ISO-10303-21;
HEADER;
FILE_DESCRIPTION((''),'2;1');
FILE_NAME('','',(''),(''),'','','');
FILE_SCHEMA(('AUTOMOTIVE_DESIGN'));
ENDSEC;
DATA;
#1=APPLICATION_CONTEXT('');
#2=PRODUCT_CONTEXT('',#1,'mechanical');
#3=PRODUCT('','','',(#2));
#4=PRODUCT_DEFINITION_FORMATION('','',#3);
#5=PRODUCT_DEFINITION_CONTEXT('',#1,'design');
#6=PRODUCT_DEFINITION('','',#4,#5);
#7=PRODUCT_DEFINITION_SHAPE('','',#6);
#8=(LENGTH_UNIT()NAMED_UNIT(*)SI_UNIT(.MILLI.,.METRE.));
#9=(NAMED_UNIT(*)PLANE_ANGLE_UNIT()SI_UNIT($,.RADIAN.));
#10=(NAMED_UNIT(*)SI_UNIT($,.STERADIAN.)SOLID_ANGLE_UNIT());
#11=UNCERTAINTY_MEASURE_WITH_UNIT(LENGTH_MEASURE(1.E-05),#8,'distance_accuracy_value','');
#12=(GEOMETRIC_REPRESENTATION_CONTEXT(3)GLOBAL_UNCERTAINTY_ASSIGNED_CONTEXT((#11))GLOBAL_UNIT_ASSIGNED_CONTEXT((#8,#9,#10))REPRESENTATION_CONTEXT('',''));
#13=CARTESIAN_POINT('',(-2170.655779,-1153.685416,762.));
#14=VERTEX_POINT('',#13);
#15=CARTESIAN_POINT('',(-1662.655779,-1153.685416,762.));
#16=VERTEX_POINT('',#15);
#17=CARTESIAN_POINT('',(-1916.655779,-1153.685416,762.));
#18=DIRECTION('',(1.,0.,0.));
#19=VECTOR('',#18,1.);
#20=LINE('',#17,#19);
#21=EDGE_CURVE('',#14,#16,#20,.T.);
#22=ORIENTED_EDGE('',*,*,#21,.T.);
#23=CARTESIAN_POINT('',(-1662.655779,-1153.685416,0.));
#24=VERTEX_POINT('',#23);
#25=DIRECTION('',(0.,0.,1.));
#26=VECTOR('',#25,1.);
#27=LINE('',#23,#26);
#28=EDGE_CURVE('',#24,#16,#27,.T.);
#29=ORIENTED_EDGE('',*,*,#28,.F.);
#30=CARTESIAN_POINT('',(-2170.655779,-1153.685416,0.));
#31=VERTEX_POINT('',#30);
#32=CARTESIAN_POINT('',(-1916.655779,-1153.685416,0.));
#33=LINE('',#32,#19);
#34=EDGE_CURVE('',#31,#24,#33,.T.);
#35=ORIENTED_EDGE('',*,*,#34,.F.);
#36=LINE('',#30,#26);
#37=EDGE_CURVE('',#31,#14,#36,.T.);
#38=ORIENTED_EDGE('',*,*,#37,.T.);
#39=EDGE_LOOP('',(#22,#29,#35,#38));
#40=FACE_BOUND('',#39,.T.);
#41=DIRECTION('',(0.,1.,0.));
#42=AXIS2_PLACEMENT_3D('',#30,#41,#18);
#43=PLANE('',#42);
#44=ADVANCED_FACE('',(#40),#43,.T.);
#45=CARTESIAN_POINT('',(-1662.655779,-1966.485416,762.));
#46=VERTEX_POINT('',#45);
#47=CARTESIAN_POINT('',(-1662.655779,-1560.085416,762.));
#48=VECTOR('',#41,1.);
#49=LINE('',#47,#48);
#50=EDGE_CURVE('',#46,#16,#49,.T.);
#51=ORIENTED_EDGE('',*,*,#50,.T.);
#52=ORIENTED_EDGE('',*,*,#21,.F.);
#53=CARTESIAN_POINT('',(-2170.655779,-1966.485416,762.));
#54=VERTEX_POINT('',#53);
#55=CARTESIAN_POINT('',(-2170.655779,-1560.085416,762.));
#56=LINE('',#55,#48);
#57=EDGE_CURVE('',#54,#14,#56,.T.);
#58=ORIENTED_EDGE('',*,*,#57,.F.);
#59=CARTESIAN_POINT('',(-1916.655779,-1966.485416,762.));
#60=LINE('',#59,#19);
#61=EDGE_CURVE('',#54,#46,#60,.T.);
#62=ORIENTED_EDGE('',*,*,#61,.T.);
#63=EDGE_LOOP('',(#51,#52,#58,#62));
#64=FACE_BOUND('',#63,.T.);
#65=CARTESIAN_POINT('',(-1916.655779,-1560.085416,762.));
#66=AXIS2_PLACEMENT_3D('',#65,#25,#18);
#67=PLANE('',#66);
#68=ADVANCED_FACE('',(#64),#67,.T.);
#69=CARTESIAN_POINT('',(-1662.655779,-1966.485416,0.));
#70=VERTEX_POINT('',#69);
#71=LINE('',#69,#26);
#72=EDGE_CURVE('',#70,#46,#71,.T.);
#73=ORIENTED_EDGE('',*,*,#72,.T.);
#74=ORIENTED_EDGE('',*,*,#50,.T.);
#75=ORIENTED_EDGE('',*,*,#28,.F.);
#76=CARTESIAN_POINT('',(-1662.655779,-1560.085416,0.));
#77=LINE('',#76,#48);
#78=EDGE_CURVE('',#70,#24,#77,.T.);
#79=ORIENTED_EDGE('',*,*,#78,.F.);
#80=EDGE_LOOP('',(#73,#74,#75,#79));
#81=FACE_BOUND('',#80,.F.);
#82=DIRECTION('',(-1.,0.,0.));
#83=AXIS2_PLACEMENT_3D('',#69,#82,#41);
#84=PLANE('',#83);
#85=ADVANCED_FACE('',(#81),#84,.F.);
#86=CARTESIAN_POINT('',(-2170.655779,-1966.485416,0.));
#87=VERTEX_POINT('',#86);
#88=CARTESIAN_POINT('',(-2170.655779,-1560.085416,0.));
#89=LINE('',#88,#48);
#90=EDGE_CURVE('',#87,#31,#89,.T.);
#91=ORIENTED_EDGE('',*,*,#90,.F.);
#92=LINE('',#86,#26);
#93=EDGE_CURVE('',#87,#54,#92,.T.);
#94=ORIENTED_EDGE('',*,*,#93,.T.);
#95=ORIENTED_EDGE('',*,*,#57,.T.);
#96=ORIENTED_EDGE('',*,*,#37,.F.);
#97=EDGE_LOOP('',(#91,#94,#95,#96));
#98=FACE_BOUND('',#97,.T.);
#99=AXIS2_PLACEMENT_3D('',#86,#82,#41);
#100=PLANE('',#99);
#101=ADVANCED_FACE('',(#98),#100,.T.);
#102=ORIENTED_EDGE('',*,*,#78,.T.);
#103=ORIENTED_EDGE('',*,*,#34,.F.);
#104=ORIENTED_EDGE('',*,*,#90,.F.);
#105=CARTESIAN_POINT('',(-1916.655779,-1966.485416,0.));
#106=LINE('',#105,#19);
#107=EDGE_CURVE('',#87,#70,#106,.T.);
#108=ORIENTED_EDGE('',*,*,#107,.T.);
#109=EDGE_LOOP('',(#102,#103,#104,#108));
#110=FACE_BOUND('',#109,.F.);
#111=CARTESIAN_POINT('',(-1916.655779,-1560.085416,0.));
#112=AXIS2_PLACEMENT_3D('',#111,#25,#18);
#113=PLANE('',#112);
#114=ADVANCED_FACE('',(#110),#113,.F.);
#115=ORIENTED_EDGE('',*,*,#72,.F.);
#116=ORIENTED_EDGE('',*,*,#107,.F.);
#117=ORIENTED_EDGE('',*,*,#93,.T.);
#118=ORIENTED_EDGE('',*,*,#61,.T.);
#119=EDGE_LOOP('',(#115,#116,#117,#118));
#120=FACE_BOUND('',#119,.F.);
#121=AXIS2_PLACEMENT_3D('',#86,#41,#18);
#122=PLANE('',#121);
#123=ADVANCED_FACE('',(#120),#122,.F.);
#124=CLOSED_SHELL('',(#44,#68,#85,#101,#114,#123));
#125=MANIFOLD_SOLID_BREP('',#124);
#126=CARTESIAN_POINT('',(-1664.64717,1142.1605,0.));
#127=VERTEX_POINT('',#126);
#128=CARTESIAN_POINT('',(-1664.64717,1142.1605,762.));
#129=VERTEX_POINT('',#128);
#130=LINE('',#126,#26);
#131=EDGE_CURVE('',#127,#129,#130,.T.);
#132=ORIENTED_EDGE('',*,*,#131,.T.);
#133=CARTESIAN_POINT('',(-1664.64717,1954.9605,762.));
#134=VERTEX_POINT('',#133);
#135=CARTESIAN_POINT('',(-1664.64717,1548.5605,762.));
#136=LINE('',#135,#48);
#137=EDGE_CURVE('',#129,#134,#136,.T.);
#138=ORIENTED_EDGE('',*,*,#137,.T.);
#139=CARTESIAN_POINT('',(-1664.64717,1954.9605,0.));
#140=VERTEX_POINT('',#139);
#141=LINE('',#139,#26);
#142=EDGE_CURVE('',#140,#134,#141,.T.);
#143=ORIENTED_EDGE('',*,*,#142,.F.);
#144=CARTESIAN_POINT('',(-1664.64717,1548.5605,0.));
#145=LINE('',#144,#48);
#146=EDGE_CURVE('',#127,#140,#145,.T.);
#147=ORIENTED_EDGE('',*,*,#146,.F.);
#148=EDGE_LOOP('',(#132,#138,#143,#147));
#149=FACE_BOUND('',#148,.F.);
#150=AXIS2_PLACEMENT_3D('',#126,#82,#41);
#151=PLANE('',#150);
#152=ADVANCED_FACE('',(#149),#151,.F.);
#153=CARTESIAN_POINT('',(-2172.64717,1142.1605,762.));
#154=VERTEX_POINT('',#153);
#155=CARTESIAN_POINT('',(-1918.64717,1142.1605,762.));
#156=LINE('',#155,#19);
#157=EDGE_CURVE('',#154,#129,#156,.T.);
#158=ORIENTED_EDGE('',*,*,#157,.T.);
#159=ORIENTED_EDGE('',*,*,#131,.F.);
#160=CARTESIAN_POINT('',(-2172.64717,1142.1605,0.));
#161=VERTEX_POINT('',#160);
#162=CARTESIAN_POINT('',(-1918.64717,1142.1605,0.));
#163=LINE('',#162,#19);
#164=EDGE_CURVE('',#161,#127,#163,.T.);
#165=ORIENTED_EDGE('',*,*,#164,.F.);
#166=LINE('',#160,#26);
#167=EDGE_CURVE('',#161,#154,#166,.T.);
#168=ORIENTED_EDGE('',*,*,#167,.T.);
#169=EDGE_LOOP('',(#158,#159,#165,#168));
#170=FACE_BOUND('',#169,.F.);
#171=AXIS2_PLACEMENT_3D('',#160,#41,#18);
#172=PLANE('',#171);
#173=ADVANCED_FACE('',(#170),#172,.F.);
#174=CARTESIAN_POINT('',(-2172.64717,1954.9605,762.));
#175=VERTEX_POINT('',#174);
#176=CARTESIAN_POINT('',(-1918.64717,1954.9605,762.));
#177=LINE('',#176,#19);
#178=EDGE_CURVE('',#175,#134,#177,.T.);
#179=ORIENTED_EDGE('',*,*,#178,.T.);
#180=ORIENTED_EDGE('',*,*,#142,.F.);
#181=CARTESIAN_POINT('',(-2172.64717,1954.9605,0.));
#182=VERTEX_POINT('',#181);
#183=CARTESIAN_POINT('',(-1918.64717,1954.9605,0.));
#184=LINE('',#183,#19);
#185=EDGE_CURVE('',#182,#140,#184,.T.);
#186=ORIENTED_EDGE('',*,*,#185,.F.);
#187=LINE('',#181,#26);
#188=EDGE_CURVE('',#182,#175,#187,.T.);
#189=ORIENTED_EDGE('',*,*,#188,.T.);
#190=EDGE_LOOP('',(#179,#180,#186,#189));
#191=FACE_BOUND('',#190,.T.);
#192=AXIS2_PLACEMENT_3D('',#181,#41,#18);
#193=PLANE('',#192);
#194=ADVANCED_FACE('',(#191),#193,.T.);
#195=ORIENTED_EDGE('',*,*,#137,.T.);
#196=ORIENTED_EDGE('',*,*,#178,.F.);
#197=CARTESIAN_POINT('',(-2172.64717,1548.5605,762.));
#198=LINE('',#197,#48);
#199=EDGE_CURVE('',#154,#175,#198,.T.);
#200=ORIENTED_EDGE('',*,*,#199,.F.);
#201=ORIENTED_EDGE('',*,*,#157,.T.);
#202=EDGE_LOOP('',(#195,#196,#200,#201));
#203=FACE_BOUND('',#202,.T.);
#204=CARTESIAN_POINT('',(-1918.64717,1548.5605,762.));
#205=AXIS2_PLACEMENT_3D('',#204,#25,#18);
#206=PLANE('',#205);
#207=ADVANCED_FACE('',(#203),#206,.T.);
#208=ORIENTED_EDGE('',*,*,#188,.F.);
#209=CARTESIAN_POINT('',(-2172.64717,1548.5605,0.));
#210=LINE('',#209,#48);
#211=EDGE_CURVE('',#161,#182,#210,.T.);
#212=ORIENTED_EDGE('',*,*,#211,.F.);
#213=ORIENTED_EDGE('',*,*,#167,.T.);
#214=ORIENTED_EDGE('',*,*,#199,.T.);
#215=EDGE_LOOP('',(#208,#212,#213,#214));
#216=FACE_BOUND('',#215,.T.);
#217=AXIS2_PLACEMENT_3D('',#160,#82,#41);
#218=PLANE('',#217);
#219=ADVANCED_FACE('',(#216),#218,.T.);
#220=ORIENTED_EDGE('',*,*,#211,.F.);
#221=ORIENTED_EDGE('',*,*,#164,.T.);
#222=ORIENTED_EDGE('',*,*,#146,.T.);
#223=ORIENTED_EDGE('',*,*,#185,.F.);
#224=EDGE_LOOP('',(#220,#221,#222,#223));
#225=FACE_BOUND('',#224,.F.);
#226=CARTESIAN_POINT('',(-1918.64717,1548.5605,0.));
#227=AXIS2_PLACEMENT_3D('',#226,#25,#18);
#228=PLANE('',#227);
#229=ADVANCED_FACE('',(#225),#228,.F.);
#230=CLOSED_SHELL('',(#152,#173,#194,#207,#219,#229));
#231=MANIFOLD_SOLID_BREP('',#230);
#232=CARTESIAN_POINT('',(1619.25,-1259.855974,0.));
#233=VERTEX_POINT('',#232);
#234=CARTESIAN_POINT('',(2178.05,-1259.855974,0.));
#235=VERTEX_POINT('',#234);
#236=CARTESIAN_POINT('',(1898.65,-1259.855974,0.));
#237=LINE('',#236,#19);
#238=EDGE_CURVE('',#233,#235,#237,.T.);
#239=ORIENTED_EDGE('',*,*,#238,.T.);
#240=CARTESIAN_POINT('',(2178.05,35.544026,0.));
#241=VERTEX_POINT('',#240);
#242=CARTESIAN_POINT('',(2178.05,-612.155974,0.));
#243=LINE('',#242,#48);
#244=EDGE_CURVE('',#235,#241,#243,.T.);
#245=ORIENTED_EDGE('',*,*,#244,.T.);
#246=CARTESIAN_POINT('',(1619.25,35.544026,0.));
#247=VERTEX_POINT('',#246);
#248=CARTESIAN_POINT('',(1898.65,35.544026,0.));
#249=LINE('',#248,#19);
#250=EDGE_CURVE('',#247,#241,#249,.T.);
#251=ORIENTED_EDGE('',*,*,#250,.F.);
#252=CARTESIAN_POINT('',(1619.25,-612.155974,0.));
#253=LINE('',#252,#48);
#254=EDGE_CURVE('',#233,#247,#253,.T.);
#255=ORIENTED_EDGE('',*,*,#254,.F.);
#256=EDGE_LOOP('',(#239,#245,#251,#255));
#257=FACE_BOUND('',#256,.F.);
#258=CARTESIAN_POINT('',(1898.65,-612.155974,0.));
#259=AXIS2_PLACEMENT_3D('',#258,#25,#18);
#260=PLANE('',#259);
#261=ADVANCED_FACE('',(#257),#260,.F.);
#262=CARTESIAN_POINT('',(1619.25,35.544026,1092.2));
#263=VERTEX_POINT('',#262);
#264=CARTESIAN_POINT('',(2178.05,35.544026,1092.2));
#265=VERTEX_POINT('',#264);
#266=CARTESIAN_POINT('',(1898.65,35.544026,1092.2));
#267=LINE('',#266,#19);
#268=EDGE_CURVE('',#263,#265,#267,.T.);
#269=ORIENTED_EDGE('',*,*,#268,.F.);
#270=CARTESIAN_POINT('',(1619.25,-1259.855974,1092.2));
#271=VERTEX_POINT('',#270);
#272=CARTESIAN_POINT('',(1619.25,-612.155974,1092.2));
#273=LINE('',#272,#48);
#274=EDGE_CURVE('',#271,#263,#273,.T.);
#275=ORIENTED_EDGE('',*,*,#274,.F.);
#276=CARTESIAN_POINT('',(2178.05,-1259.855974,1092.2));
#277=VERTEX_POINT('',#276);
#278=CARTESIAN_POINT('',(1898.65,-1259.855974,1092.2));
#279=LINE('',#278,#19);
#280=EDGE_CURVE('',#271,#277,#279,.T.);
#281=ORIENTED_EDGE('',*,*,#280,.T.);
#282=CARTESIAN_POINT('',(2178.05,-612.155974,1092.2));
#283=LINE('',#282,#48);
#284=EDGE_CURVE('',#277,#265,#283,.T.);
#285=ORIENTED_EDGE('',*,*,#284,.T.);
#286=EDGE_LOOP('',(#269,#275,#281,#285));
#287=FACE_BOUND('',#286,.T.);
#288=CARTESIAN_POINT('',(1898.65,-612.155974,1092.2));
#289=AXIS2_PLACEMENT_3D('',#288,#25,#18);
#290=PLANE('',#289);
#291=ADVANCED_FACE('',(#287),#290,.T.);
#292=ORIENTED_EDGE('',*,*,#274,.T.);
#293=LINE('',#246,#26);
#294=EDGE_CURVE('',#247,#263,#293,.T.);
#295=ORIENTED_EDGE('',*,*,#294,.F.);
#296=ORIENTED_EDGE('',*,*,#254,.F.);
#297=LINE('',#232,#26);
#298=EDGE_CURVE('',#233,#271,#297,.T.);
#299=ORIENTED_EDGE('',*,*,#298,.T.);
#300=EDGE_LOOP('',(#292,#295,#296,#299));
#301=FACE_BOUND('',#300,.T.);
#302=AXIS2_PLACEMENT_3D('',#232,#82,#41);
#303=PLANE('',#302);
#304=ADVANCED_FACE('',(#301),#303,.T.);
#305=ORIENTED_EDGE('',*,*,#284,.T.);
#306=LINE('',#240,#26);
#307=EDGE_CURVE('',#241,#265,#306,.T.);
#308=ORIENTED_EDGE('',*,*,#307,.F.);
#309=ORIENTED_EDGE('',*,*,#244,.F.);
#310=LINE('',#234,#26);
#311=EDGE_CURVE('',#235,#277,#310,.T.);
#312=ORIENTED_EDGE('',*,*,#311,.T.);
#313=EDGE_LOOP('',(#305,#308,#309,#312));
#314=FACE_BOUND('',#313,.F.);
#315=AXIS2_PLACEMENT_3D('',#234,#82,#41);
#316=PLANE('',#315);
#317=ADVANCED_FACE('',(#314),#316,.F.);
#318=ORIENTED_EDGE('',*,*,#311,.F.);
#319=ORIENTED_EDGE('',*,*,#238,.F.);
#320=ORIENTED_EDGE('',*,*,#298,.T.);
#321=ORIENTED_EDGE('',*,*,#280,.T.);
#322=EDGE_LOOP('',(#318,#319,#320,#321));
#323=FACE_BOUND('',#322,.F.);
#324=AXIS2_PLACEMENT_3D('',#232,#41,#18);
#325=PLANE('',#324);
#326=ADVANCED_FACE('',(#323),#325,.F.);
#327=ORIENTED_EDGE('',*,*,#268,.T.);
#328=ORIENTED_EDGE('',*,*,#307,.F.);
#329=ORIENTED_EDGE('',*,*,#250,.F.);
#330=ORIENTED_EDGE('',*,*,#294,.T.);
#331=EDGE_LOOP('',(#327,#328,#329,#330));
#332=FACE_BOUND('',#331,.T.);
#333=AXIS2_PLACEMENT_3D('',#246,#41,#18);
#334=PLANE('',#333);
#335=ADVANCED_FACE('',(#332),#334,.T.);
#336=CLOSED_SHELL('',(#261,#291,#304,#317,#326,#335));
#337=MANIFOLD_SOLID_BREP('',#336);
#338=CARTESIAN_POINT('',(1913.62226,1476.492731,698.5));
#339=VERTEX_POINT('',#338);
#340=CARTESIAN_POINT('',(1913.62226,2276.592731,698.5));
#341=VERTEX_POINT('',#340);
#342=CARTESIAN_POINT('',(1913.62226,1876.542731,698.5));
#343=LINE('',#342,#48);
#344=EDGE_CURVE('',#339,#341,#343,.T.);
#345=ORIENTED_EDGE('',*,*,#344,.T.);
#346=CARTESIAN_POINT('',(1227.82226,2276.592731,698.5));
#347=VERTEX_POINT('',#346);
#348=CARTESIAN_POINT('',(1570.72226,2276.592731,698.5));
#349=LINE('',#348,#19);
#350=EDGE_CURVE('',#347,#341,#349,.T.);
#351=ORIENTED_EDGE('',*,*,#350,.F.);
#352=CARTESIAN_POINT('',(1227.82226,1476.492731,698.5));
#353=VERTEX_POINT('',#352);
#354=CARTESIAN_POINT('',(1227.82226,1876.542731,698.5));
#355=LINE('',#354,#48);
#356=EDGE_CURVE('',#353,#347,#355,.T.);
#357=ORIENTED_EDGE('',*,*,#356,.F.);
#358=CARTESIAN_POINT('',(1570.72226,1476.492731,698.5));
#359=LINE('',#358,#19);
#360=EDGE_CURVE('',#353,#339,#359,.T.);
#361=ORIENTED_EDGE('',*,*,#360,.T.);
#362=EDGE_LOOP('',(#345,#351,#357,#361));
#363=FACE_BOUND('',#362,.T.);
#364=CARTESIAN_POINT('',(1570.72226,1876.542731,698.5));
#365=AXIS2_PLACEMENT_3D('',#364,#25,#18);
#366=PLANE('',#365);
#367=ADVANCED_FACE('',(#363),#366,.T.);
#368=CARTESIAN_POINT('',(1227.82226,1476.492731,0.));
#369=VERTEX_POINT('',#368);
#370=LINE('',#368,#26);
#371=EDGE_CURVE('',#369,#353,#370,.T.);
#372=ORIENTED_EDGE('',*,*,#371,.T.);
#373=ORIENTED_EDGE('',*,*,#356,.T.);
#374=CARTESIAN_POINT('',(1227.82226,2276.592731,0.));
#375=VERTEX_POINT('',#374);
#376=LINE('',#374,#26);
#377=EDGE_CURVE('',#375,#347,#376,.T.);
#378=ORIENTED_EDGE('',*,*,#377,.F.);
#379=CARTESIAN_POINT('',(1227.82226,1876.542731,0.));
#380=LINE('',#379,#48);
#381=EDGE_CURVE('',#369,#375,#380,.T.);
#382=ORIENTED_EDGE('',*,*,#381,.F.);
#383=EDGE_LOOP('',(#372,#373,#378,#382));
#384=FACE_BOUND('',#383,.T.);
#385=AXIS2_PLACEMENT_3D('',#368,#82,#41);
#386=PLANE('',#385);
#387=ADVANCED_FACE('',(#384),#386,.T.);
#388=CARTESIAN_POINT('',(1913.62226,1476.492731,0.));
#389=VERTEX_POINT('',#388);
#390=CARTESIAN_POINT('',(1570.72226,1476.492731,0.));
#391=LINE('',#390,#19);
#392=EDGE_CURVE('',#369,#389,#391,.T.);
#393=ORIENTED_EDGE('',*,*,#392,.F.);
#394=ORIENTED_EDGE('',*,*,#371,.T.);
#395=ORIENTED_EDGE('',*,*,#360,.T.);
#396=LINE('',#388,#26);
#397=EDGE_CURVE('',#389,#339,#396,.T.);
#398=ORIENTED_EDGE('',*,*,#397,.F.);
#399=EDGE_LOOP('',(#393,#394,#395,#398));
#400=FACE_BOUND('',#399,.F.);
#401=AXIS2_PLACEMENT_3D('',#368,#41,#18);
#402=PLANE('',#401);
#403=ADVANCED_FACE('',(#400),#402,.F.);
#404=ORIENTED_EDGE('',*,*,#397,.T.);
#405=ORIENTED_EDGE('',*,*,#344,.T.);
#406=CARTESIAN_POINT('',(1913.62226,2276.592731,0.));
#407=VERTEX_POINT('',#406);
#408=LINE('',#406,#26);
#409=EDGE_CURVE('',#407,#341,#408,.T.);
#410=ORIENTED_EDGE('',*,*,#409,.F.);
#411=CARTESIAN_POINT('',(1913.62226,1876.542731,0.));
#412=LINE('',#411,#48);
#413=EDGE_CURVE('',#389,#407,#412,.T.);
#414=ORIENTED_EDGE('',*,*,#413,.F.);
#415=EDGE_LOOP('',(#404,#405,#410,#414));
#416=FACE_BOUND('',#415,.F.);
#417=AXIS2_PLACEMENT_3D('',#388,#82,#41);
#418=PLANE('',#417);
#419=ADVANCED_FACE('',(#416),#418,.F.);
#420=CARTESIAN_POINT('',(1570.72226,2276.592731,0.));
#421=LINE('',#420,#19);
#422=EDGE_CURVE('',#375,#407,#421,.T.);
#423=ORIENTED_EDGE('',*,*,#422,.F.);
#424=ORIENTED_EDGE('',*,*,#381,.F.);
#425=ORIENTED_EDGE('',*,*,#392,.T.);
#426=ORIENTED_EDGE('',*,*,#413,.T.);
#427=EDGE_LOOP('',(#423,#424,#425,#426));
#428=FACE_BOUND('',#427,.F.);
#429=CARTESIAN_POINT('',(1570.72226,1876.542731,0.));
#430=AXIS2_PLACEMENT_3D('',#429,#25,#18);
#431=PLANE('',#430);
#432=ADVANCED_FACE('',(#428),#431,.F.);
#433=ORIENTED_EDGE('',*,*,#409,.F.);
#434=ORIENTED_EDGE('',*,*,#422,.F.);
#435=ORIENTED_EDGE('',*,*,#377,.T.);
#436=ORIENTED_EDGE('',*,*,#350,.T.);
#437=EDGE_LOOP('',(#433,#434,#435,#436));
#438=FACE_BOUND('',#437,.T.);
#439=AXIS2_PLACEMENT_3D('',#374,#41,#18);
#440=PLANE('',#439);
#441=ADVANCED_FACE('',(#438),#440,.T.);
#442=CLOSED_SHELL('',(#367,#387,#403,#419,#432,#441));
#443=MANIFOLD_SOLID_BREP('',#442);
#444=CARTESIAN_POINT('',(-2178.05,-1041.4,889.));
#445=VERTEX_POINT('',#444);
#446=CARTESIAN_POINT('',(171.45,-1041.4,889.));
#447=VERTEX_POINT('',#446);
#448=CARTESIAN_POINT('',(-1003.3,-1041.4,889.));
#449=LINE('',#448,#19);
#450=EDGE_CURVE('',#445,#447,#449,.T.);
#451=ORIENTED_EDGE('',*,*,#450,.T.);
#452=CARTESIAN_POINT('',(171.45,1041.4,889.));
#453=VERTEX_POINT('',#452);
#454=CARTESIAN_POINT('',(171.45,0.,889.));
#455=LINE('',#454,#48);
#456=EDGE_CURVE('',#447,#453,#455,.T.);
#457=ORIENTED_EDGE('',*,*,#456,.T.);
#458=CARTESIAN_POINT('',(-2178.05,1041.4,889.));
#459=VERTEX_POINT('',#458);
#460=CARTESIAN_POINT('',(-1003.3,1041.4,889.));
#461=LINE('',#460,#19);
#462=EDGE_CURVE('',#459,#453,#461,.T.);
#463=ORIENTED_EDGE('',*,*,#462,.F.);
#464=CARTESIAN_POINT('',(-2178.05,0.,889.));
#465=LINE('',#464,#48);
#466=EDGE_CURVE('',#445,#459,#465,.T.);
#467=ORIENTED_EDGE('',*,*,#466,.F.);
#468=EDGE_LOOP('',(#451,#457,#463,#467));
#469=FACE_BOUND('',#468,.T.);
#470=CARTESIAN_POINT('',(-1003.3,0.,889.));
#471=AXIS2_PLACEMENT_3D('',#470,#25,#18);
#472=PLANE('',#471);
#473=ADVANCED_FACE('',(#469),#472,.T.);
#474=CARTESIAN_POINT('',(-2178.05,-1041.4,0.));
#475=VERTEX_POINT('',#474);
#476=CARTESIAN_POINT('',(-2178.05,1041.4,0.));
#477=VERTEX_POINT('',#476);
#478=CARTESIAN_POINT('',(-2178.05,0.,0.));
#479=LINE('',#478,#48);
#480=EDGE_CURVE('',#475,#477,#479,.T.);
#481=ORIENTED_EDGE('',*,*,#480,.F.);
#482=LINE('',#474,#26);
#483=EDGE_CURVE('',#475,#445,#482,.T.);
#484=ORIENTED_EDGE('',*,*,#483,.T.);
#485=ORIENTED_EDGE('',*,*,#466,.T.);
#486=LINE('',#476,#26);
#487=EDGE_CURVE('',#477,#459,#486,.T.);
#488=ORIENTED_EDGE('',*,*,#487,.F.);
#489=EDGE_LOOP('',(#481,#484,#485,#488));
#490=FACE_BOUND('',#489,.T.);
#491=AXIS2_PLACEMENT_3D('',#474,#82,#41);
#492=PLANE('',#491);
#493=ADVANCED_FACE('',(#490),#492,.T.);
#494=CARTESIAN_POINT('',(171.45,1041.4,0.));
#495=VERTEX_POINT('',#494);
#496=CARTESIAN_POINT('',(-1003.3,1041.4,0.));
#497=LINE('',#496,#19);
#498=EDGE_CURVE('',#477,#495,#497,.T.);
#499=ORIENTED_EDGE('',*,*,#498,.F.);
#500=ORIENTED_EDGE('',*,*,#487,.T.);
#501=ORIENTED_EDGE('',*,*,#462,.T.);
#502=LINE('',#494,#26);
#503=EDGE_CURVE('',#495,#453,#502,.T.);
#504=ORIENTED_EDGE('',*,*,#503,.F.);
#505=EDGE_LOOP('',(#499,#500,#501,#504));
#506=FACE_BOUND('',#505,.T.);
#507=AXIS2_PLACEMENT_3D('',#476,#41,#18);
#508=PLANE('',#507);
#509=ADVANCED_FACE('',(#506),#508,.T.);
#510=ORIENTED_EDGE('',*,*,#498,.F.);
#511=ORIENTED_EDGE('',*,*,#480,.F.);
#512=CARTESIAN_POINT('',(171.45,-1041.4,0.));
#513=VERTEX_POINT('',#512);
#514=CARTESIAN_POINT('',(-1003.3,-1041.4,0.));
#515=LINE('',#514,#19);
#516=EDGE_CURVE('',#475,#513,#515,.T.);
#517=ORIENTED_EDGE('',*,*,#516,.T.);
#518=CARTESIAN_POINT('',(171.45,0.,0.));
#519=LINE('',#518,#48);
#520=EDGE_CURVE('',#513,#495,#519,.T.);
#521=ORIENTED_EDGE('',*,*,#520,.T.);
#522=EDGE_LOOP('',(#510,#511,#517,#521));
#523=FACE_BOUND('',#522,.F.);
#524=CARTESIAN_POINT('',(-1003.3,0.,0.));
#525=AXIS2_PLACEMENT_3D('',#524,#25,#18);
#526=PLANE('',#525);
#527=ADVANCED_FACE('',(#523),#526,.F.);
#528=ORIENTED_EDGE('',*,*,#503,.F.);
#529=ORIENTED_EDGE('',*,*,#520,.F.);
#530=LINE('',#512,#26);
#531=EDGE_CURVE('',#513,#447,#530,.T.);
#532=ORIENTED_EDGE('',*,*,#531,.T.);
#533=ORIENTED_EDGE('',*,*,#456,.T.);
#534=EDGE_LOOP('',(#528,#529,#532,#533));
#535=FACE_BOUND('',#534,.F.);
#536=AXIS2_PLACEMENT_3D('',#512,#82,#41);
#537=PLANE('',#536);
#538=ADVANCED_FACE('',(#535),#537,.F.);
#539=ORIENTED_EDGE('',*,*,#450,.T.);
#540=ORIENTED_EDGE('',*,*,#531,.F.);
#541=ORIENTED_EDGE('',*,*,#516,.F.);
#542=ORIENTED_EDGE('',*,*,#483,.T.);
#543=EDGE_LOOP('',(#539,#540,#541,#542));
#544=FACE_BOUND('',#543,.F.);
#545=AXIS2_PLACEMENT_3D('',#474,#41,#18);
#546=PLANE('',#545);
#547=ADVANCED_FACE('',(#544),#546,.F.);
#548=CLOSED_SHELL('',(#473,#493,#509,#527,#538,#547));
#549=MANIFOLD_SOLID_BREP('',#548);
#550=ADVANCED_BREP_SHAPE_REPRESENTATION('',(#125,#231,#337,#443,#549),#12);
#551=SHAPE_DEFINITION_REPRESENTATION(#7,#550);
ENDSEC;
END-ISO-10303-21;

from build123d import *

# Parameters (mm, degrees)
F0_W     = 508
F0_H     = 812.8
F2_DEPTH = 762
F0_W_2   = 2349.5
F0_H_2   = 2082.8
F3_DEPTH = 889
F0_W_3   = 558.8
F0_H_3   = 1295.4
F5_DEPTH = 1092.2
F0_W_4   = 685.8
F0_H_4   = 800.1
F6_DEPTH = 698.5


# Not quite as in the source:
# - the program builds the solid bodies; features that only make, move or delete a surface that nothing else refers to are left out


with BuildPart() as f2:
    # F0 (on Top) → F2 (new body)
    with BuildSketch(Plane.XY):
        with Locations((-1916.6557788849, -1560.0854158401)):
            Rectangle(F0_W, F0_H)
    extrude(amount=F2_DEPTH)


with BuildPart() as f2b:
    # F0 (on Top) → F2, piece 2 (new body)
    with BuildSketch(Plane.XY):
        with Locations((-1918.6471700668, 1548.560500145)):
            Rectangle(F0_W, F0_H)
    extrude(amount=F2_DEPTH)


with BuildPart() as f3:
    # F0 (on Top) → F3 (new body)
    with BuildSketch(Plane.XY):
        with Locations((-1003.3, 0)):
            Rectangle(F0_W_2, F0_H_2)
    extrude(amount=F3_DEPTH)


with BuildPart() as f5:
    # F0 (on Top) → F5 (new body)
    with BuildSketch(Plane.XY):
        with Locations((1898.65, -612.1559739113)):
            Rectangle(F0_W_3, F0_H_3)
    extrude(amount=F5_DEPTH)


with BuildPart() as f6:
    # F0 (on Top) → F6 (new body)
    with BuildSketch(Plane.XY):
        with Locations((1570.7222600937, 1876.5427314758)):
            Rectangle(F0_W_4, F0_H_4)
    extrude(amount=F6_DEPTH)


solid = Compound([f2.part, f2b.part, f3.part, f5.part, f6.part])
